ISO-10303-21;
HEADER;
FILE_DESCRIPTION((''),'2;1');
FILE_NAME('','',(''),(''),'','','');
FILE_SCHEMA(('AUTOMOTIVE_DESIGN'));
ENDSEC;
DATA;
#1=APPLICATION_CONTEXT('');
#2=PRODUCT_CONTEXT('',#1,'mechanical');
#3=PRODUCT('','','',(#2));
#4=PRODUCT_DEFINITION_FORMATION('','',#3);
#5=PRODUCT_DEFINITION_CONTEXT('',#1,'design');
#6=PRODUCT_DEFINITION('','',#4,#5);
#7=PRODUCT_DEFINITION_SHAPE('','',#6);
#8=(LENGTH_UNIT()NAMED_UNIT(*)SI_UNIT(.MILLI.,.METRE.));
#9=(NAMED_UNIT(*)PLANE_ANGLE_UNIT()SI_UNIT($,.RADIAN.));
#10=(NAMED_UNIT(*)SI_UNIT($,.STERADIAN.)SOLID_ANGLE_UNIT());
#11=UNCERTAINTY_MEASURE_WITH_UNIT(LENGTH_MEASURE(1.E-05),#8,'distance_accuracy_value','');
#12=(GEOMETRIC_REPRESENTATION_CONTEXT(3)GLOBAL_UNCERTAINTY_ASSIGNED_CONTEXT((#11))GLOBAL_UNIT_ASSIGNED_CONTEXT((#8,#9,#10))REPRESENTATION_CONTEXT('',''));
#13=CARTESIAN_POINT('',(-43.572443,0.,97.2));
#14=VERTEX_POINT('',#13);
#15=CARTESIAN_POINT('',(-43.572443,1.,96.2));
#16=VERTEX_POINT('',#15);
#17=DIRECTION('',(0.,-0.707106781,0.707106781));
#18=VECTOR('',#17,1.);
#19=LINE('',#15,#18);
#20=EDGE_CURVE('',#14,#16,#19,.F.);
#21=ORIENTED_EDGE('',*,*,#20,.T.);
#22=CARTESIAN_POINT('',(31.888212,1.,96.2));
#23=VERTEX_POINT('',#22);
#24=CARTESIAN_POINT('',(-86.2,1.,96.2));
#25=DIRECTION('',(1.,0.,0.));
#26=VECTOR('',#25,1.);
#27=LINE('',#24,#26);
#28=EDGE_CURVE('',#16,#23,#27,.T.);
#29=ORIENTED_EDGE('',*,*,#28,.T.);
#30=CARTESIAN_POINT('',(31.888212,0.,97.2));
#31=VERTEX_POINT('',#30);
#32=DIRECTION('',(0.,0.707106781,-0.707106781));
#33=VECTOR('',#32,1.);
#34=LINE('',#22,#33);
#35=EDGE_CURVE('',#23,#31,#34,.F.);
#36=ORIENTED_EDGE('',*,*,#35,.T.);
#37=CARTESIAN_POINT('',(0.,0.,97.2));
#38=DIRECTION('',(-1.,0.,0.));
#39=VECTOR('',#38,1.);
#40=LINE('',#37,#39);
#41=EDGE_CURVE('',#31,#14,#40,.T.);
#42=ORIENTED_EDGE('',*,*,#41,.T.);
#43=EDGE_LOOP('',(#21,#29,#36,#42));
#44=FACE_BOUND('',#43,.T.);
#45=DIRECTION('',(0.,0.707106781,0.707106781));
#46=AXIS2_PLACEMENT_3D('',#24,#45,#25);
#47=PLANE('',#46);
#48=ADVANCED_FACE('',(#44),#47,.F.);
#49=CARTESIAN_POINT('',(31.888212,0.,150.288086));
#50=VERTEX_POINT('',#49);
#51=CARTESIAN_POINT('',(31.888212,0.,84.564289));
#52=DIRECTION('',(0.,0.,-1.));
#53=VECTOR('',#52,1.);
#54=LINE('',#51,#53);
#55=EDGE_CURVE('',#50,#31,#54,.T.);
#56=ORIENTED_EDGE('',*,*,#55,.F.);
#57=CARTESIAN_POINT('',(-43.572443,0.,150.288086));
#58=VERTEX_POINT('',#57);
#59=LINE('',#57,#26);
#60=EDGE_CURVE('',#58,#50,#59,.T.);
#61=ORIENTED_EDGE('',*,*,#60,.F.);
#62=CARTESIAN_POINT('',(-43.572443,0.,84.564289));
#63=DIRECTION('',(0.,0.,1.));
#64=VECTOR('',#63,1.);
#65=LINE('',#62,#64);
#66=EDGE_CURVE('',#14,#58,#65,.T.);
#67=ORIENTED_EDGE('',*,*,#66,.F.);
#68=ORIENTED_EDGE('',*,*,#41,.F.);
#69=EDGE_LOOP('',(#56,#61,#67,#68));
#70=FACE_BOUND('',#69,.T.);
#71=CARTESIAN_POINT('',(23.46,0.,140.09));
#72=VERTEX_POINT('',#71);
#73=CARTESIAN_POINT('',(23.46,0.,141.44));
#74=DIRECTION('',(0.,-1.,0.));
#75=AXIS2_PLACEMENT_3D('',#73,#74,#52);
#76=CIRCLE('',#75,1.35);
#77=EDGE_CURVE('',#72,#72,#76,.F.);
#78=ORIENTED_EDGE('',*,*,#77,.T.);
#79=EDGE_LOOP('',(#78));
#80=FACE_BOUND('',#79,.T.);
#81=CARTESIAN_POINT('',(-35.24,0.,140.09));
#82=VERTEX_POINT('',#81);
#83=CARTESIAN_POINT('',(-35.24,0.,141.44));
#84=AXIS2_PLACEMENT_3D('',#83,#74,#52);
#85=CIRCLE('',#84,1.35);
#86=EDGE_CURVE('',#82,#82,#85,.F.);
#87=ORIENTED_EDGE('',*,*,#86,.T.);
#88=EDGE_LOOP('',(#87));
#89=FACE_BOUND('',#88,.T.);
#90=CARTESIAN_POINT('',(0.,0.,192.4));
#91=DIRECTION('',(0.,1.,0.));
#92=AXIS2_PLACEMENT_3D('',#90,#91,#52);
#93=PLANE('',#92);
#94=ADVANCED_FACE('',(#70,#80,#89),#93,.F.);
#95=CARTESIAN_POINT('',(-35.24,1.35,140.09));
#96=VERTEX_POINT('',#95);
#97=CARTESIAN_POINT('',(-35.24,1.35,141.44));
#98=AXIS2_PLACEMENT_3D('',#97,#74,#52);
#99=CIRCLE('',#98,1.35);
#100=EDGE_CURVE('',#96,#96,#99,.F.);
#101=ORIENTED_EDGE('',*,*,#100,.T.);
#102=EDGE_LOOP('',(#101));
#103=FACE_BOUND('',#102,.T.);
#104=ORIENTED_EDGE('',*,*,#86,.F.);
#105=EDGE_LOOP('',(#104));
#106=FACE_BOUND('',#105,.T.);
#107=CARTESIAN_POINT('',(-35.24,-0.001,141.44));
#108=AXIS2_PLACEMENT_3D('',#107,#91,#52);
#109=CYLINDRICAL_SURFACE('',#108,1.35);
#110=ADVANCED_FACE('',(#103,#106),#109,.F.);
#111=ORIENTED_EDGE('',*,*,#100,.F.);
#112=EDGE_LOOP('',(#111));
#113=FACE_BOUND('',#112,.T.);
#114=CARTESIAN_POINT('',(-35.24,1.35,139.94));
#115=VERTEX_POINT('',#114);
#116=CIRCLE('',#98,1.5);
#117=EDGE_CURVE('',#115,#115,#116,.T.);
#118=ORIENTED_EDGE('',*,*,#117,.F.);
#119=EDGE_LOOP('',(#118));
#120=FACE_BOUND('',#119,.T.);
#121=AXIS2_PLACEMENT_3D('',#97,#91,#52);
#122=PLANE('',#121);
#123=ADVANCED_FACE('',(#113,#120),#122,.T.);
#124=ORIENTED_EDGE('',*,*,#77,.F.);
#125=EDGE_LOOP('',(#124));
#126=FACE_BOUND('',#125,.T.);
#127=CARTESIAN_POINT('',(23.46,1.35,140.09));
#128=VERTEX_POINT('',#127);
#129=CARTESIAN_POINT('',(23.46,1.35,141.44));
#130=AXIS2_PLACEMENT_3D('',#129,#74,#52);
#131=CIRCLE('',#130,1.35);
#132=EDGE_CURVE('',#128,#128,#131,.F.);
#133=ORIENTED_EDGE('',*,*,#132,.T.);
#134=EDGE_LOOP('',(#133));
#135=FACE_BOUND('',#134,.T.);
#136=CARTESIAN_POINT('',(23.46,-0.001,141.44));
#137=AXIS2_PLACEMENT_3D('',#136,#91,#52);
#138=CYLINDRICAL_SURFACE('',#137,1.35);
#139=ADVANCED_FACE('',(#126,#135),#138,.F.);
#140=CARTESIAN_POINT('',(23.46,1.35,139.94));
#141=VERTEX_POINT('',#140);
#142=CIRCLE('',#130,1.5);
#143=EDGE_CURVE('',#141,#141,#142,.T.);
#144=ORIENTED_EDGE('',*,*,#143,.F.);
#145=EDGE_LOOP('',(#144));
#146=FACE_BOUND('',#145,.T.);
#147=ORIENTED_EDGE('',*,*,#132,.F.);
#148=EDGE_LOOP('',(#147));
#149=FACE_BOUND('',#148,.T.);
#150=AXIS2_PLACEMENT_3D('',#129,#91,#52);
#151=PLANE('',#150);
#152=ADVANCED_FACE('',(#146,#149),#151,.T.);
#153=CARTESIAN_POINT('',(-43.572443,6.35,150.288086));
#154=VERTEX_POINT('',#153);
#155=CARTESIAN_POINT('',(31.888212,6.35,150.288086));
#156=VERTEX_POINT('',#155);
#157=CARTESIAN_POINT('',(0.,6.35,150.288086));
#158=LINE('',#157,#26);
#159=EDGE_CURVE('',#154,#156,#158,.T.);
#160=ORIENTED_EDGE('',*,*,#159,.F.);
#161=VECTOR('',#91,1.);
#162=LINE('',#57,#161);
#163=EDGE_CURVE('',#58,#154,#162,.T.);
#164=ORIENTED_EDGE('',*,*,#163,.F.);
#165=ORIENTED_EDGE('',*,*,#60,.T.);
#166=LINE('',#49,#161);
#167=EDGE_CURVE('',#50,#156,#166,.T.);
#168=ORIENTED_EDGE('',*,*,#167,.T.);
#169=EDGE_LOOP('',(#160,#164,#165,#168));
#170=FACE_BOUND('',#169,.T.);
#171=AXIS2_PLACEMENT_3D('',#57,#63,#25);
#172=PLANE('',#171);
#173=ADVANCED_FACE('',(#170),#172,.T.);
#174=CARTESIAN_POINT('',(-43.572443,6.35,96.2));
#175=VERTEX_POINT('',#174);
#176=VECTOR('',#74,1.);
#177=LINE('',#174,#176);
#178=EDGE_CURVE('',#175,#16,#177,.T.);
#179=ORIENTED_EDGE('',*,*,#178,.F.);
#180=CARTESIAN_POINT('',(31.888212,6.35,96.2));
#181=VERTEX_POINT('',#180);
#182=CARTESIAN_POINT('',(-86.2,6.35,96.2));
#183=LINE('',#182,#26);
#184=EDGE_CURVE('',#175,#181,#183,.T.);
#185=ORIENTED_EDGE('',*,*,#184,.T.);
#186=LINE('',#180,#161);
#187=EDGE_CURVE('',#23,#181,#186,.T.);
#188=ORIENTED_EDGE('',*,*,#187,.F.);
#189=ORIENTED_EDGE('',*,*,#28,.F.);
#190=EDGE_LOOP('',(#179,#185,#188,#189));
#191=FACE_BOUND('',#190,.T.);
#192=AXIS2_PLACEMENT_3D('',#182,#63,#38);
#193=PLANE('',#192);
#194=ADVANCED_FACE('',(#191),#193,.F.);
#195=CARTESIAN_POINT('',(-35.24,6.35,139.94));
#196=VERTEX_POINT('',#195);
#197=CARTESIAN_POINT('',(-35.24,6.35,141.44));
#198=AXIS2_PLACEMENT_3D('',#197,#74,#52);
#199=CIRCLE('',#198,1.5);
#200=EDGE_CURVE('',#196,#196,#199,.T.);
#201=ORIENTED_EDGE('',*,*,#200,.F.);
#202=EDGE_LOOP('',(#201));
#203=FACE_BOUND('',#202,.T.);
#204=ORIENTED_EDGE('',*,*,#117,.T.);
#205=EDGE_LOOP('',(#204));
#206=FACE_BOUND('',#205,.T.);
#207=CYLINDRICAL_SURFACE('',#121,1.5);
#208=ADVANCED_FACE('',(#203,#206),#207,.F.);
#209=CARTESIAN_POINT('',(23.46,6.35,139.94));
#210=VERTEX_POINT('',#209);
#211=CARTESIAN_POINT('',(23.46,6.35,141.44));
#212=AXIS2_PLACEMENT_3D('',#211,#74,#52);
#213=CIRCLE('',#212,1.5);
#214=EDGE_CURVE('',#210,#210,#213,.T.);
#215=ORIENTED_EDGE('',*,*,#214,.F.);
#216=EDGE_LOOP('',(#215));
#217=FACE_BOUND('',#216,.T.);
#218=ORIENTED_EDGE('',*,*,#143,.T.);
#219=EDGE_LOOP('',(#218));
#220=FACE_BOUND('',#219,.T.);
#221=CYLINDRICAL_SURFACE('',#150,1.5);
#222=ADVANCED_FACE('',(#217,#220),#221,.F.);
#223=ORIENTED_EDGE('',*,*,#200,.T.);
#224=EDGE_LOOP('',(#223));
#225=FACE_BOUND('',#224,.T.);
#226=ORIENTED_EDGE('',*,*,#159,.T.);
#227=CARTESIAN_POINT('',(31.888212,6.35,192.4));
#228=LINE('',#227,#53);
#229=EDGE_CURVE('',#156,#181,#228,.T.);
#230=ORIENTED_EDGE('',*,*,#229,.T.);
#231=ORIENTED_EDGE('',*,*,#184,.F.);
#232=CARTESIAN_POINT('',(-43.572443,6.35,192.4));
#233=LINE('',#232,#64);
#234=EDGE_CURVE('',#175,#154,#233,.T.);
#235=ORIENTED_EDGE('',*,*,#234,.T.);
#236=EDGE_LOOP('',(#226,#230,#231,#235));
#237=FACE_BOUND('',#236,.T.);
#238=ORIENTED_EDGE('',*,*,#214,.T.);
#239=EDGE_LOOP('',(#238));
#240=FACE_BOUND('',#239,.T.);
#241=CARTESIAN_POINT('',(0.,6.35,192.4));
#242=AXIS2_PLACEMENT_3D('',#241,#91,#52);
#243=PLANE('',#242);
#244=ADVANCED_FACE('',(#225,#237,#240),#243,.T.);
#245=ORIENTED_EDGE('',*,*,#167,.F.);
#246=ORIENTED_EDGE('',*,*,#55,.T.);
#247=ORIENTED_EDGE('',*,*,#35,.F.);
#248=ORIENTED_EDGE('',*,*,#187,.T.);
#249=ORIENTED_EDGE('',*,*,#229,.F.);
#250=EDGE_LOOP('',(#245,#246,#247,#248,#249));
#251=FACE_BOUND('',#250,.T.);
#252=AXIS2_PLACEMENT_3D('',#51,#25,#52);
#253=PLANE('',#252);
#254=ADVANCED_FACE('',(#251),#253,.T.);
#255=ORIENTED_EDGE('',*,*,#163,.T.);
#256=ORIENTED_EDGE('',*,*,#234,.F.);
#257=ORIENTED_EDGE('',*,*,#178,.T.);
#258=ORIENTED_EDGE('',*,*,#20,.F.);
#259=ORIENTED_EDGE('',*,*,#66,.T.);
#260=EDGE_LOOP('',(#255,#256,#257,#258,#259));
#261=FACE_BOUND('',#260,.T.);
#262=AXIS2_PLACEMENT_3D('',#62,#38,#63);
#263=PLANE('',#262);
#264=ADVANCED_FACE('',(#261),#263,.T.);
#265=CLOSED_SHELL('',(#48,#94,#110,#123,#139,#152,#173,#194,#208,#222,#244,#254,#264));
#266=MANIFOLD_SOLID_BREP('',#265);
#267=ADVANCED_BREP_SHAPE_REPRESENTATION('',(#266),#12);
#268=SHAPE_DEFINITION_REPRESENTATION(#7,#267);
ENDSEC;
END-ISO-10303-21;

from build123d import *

# Parameters (mm, degrees)
SKETCH1_W                      = 172.4
SKETCH1_H                      = 192.4
BOSS_EXTRUDE1_DEPTH            = 6.35
CUT_EXTRUDE1_REACH             = 131.326
SKETCH2_W                      = 41
SKETCH2_H                      = 41
CBORE_FOR_M4_SHCS1_D           = 4.5
CBORE_FOR_M4_SHCS1_CBORE_D     = 8
CBORE_FOR_M4_SHCS1_CBORE_DEPTH = 4
CUT_EXTRUDE3_REACH             = 131.326
SKETCH5_R                      = 1.2
SKETCH6_R                      = 1.4
CUT_EXTRUDE4_DEPTH             = 4
CUT_EXTRUDE5_REACH             = 131.326
SKETCH7_R                      = 1.35
SKETCH8_R                      = 1.5
CUT_EXTRUDE6_DEPTH             = 5
SKETCH9_W                      = 3
SKETCH9_H                      = 192.4
EXTRUDE_THIN1_DEPTH            = 3
CHAMFER1_SIZE                  = 3
CHAMFER2_SIZE                  = 1
CUT_EXTRUDE8_DEPTH             = 302.265202936
CUT_EXTRUDE8_DEPTH_BACK        = 302.265202936
SKETCH11_W                     = 285.28996188
SKETCH11_H                     = 259.000443209
SKETCH11_W_2                   = 75.460655446
SKETCH11_H_2                   = 65.723796679


with BuildPart() as part:
    # Sketch1 → Boss-Extrude1 (new body)
    with BuildSketch(Plane(origin=(0, 0, 0), x_dir=(1, 0, 0), z_dir=(0, 1, 0))):
        Rectangle(SKETCH1_W, SKETCH1_H)
    extrude(amount=BOSS_EXTRUDE1_DEPTH)

    # Sketch2 → Cut-Extrude1 (cut, up to next)
    with BuildSketch(Plane(origin=(0, 6.35, 0), x_dir=(1, 0, 0), z_dir=(0, 1, 0)), mode=Mode.PRIVATE) as cut_extrude1_sk1:
        with Locations((-65.7, 75.7)):
            Rectangle(SKETCH2_W, SKETCH2_H)
    cut_extrude1_tool1 = extrude(cut_extrude1_sk1.sketch, amount=-CUT_EXTRUDE1_REACH, mode=Mode.PRIVATE) & part.part
    add(cut_extrude1_tool1.solids().sort_by_distance((-65.7, 6.35, -75.7))[0], mode=Mode.SUBTRACT)

    # CBORE for M4 SHCS1 (through all)
    with Locations(Plane(origin=(0, 6.35, 0), x_dir=(1, 0, 0), z_dir=(0, 1, 0))):
        with Locations((66.2, 76.2), (-66.2, 34.39549116), (-66.2, -56.2), (-26.2, 76.2)):
            CounterBoreHole(CBORE_FOR_M4_SHCS1_D / 2, CBORE_FOR_M4_SHCS1_CBORE_D / 2, CBORE_FOR_M4_SHCS1_CBORE_DEPTH)

    # Sketch5 → Cut-Extrude3 (cut, up to next)
    with BuildSketch(Plane(origin=(0, 6.35, 0), x_dir=(1, 0, 0), z_dir=(0, 1, 0)), mode=Mode.PRIVATE) as cut_extrude3_sk1:
        with Locations(Location((-76.36, -87.31, 0), (0, 0, 270))):
            Circle(SKETCH5_R)
    cut_extrude3_tool1 = extrude(cut_extrude3_sk1.sketch, amount=-CUT_EXTRUDE3_REACH, mode=Mode.PRIVATE) & part.part
    # Sketch5 → Cut-Extrude3 (cut, up to next)
    with BuildSketch(Plane(origin=(0, 6.35, 0), x_dir=(1, 0, 0), z_dir=(0, 1, 0)), mode=Mode.PRIVATE) as cut_extrude3_sk2:
        with Locations(Location((-56.04, -87.31, 0), (0, 0, 270))):
            Circle(SKETCH5_R)
    cut_extrude3_tool2 = extrude(cut_extrude3_sk2.sketch, amount=-CUT_EXTRUDE3_REACH, mode=Mode.PRIVATE) & part.part
    add(cut_extrude3_tool1.solids().sort_by_distance((-76.36, 6.35, 87.31))[0], mode=Mode.SUBTRACT)
    add(cut_extrude3_tool2.solids().sort_by_distance((-56.04, 6.35, 87.31))[0], mode=Mode.SUBTRACT)

    # Sketch6 → Cut-Extrude4 (cut)
    with BuildSketch(Plane(origin=(0, 6.35, 0), x_dir=(1, 0, 0), z_dir=(0, 1, 0))):
        with Locations(Location((-76.36, -87.31, 0), (0, 0, 270))):
            Circle(SKETCH6_R)
        with Locations(Location((-56.04, -87.31, 0), (0, 0, 270))):
            Circle(SKETCH6_R)
    extrude(amount=-CUT_EXTRUDE4_DEPTH, mode=Mode.SUBTRACT)

    # Sketch7 → Cut-Extrude5 (cut, up to next)
    with BuildSketch(Plane(origin=(0, 6.35, 0), x_dir=(1, 0, 0), z_dir=(0, 1, 0)), mode=Mode.PRIVATE) as cut_extrude5_sk1:
        with Locations(Location((-35.24, -50.96, 0), (0, 0, 270))):
            Circle(SKETCH7_R)
    cut_extrude5_tool1 = extrude(cut_extrude5_sk1.sketch, amount=-CUT_EXTRUDE5_REACH, mode=Mode.PRIVATE) & part.part
    # Sketch7 → Cut-Extrude5 (cut, up to next)
    with BuildSketch(Plane(origin=(0, 6.35, 0), x_dir=(1, 0, 0), z_dir=(0, 1, 0)), mode=Mode.PRIVATE) as cut_extrude5_sk2:
        with Locations(Location((23.46, -50.96, 0), (0, 0, 270))):
            Circle(SKETCH7_R)
    cut_extrude5_tool2 = extrude(cut_extrude5_sk2.sketch, amount=-CUT_EXTRUDE5_REACH, mode=Mode.PRIVATE) & part.part
    add(cut_extrude5_tool1.solids().sort_by_distance((-35.24, 6.35, 50.96))[0], mode=Mode.SUBTRACT)
    add(cut_extrude5_tool2.solids().sort_by_distance((23.46, 6.35, 50.96))[0], mode=Mode.SUBTRACT)

    # Sketch8 → Cut-Extrude6 (cut)
    with BuildSketch(Plane(origin=(0, 6.35, 0), x_dir=(1, 0, 0), z_dir=(0, 1, 0))):
        with Locations(Location((-35.24, -50.96, 0), (0, 0, 270))):
            Circle(SKETCH8_R)
        with Locations(Location((23.46, -50.96, 0), (0, 0, 270))):
            Circle(SKETCH8_R)
    extrude(amount=-CUT_EXTRUDE6_DEPTH, mode=Mode.SUBTRACT)

    # Sketch9 → Extrude-Thin1 (add)
    with BuildSketch(Plane(origin=(0, 6.35, 0), x_dir=(1, 0, 0), z_dir=(0, 1, 0))):
        with Locations((78.7, 0)):
            Rectangle(SKETCH9_W, SKETCH9_H)
    extrude(amount=EXTRUDE_THIN1_DEPTH)

    # Chamfer1
    chamfer1_edges = [part.edges().sort_by_distance(p)[0] for p in [
        (77.2, 6.35, 0),
        (80.2, 6.35, 0),
    ]]
    chamfer(chamfer1_edges, length=CHAMFER1_SIZE - 0.0001)  # a hair under: the kernel refuses the full size

    # Chamfer2
    chamfer2_edges = [part.edges().sort_by_distance(p)[0] for p in [
        (0, 0, 96.2),
        (86.2, 0, 0),
    ]]
    chamfer(chamfer2_edges, length=CHAMFER2_SIZE)


with BuildPart() as body_2:
    # Mirror1: mirrored copy
    add(part.part.mirror(Plane(origin=(1.506427127, 3.750129783, 96.2), x_dir=(1, 0, 0), z_dir=(0, 0, 1))))

    # Sketch11 → Cut-Extrude8 (cut, two sides: drawn at the far end of the back side and taken through both)
    with BuildSketch(Plane(origin=(0, 6.35, 0), x_dir=(1, 0, 0), z_dir=(0, 1, 0)).offset(-CUT_EXTRUDE8_DEPTH_BACK)):
        with Locations((10.467123175, -184.853934456)):
            Rectangle(SKETCH11_W, SKETCH11_H)
        with Locations((-5.84211526, -117.426187493)):
            Rectangle(SKETCH11_W_2, SKETCH11_H_2, mode=Mode.SUBTRACT)
    extrude(amount=CUT_EXTRUDE8_DEPTH + CUT_EXTRUDE8_DEPTH_BACK, mode=Mode.SUBTRACT)


solid = body_2.part
